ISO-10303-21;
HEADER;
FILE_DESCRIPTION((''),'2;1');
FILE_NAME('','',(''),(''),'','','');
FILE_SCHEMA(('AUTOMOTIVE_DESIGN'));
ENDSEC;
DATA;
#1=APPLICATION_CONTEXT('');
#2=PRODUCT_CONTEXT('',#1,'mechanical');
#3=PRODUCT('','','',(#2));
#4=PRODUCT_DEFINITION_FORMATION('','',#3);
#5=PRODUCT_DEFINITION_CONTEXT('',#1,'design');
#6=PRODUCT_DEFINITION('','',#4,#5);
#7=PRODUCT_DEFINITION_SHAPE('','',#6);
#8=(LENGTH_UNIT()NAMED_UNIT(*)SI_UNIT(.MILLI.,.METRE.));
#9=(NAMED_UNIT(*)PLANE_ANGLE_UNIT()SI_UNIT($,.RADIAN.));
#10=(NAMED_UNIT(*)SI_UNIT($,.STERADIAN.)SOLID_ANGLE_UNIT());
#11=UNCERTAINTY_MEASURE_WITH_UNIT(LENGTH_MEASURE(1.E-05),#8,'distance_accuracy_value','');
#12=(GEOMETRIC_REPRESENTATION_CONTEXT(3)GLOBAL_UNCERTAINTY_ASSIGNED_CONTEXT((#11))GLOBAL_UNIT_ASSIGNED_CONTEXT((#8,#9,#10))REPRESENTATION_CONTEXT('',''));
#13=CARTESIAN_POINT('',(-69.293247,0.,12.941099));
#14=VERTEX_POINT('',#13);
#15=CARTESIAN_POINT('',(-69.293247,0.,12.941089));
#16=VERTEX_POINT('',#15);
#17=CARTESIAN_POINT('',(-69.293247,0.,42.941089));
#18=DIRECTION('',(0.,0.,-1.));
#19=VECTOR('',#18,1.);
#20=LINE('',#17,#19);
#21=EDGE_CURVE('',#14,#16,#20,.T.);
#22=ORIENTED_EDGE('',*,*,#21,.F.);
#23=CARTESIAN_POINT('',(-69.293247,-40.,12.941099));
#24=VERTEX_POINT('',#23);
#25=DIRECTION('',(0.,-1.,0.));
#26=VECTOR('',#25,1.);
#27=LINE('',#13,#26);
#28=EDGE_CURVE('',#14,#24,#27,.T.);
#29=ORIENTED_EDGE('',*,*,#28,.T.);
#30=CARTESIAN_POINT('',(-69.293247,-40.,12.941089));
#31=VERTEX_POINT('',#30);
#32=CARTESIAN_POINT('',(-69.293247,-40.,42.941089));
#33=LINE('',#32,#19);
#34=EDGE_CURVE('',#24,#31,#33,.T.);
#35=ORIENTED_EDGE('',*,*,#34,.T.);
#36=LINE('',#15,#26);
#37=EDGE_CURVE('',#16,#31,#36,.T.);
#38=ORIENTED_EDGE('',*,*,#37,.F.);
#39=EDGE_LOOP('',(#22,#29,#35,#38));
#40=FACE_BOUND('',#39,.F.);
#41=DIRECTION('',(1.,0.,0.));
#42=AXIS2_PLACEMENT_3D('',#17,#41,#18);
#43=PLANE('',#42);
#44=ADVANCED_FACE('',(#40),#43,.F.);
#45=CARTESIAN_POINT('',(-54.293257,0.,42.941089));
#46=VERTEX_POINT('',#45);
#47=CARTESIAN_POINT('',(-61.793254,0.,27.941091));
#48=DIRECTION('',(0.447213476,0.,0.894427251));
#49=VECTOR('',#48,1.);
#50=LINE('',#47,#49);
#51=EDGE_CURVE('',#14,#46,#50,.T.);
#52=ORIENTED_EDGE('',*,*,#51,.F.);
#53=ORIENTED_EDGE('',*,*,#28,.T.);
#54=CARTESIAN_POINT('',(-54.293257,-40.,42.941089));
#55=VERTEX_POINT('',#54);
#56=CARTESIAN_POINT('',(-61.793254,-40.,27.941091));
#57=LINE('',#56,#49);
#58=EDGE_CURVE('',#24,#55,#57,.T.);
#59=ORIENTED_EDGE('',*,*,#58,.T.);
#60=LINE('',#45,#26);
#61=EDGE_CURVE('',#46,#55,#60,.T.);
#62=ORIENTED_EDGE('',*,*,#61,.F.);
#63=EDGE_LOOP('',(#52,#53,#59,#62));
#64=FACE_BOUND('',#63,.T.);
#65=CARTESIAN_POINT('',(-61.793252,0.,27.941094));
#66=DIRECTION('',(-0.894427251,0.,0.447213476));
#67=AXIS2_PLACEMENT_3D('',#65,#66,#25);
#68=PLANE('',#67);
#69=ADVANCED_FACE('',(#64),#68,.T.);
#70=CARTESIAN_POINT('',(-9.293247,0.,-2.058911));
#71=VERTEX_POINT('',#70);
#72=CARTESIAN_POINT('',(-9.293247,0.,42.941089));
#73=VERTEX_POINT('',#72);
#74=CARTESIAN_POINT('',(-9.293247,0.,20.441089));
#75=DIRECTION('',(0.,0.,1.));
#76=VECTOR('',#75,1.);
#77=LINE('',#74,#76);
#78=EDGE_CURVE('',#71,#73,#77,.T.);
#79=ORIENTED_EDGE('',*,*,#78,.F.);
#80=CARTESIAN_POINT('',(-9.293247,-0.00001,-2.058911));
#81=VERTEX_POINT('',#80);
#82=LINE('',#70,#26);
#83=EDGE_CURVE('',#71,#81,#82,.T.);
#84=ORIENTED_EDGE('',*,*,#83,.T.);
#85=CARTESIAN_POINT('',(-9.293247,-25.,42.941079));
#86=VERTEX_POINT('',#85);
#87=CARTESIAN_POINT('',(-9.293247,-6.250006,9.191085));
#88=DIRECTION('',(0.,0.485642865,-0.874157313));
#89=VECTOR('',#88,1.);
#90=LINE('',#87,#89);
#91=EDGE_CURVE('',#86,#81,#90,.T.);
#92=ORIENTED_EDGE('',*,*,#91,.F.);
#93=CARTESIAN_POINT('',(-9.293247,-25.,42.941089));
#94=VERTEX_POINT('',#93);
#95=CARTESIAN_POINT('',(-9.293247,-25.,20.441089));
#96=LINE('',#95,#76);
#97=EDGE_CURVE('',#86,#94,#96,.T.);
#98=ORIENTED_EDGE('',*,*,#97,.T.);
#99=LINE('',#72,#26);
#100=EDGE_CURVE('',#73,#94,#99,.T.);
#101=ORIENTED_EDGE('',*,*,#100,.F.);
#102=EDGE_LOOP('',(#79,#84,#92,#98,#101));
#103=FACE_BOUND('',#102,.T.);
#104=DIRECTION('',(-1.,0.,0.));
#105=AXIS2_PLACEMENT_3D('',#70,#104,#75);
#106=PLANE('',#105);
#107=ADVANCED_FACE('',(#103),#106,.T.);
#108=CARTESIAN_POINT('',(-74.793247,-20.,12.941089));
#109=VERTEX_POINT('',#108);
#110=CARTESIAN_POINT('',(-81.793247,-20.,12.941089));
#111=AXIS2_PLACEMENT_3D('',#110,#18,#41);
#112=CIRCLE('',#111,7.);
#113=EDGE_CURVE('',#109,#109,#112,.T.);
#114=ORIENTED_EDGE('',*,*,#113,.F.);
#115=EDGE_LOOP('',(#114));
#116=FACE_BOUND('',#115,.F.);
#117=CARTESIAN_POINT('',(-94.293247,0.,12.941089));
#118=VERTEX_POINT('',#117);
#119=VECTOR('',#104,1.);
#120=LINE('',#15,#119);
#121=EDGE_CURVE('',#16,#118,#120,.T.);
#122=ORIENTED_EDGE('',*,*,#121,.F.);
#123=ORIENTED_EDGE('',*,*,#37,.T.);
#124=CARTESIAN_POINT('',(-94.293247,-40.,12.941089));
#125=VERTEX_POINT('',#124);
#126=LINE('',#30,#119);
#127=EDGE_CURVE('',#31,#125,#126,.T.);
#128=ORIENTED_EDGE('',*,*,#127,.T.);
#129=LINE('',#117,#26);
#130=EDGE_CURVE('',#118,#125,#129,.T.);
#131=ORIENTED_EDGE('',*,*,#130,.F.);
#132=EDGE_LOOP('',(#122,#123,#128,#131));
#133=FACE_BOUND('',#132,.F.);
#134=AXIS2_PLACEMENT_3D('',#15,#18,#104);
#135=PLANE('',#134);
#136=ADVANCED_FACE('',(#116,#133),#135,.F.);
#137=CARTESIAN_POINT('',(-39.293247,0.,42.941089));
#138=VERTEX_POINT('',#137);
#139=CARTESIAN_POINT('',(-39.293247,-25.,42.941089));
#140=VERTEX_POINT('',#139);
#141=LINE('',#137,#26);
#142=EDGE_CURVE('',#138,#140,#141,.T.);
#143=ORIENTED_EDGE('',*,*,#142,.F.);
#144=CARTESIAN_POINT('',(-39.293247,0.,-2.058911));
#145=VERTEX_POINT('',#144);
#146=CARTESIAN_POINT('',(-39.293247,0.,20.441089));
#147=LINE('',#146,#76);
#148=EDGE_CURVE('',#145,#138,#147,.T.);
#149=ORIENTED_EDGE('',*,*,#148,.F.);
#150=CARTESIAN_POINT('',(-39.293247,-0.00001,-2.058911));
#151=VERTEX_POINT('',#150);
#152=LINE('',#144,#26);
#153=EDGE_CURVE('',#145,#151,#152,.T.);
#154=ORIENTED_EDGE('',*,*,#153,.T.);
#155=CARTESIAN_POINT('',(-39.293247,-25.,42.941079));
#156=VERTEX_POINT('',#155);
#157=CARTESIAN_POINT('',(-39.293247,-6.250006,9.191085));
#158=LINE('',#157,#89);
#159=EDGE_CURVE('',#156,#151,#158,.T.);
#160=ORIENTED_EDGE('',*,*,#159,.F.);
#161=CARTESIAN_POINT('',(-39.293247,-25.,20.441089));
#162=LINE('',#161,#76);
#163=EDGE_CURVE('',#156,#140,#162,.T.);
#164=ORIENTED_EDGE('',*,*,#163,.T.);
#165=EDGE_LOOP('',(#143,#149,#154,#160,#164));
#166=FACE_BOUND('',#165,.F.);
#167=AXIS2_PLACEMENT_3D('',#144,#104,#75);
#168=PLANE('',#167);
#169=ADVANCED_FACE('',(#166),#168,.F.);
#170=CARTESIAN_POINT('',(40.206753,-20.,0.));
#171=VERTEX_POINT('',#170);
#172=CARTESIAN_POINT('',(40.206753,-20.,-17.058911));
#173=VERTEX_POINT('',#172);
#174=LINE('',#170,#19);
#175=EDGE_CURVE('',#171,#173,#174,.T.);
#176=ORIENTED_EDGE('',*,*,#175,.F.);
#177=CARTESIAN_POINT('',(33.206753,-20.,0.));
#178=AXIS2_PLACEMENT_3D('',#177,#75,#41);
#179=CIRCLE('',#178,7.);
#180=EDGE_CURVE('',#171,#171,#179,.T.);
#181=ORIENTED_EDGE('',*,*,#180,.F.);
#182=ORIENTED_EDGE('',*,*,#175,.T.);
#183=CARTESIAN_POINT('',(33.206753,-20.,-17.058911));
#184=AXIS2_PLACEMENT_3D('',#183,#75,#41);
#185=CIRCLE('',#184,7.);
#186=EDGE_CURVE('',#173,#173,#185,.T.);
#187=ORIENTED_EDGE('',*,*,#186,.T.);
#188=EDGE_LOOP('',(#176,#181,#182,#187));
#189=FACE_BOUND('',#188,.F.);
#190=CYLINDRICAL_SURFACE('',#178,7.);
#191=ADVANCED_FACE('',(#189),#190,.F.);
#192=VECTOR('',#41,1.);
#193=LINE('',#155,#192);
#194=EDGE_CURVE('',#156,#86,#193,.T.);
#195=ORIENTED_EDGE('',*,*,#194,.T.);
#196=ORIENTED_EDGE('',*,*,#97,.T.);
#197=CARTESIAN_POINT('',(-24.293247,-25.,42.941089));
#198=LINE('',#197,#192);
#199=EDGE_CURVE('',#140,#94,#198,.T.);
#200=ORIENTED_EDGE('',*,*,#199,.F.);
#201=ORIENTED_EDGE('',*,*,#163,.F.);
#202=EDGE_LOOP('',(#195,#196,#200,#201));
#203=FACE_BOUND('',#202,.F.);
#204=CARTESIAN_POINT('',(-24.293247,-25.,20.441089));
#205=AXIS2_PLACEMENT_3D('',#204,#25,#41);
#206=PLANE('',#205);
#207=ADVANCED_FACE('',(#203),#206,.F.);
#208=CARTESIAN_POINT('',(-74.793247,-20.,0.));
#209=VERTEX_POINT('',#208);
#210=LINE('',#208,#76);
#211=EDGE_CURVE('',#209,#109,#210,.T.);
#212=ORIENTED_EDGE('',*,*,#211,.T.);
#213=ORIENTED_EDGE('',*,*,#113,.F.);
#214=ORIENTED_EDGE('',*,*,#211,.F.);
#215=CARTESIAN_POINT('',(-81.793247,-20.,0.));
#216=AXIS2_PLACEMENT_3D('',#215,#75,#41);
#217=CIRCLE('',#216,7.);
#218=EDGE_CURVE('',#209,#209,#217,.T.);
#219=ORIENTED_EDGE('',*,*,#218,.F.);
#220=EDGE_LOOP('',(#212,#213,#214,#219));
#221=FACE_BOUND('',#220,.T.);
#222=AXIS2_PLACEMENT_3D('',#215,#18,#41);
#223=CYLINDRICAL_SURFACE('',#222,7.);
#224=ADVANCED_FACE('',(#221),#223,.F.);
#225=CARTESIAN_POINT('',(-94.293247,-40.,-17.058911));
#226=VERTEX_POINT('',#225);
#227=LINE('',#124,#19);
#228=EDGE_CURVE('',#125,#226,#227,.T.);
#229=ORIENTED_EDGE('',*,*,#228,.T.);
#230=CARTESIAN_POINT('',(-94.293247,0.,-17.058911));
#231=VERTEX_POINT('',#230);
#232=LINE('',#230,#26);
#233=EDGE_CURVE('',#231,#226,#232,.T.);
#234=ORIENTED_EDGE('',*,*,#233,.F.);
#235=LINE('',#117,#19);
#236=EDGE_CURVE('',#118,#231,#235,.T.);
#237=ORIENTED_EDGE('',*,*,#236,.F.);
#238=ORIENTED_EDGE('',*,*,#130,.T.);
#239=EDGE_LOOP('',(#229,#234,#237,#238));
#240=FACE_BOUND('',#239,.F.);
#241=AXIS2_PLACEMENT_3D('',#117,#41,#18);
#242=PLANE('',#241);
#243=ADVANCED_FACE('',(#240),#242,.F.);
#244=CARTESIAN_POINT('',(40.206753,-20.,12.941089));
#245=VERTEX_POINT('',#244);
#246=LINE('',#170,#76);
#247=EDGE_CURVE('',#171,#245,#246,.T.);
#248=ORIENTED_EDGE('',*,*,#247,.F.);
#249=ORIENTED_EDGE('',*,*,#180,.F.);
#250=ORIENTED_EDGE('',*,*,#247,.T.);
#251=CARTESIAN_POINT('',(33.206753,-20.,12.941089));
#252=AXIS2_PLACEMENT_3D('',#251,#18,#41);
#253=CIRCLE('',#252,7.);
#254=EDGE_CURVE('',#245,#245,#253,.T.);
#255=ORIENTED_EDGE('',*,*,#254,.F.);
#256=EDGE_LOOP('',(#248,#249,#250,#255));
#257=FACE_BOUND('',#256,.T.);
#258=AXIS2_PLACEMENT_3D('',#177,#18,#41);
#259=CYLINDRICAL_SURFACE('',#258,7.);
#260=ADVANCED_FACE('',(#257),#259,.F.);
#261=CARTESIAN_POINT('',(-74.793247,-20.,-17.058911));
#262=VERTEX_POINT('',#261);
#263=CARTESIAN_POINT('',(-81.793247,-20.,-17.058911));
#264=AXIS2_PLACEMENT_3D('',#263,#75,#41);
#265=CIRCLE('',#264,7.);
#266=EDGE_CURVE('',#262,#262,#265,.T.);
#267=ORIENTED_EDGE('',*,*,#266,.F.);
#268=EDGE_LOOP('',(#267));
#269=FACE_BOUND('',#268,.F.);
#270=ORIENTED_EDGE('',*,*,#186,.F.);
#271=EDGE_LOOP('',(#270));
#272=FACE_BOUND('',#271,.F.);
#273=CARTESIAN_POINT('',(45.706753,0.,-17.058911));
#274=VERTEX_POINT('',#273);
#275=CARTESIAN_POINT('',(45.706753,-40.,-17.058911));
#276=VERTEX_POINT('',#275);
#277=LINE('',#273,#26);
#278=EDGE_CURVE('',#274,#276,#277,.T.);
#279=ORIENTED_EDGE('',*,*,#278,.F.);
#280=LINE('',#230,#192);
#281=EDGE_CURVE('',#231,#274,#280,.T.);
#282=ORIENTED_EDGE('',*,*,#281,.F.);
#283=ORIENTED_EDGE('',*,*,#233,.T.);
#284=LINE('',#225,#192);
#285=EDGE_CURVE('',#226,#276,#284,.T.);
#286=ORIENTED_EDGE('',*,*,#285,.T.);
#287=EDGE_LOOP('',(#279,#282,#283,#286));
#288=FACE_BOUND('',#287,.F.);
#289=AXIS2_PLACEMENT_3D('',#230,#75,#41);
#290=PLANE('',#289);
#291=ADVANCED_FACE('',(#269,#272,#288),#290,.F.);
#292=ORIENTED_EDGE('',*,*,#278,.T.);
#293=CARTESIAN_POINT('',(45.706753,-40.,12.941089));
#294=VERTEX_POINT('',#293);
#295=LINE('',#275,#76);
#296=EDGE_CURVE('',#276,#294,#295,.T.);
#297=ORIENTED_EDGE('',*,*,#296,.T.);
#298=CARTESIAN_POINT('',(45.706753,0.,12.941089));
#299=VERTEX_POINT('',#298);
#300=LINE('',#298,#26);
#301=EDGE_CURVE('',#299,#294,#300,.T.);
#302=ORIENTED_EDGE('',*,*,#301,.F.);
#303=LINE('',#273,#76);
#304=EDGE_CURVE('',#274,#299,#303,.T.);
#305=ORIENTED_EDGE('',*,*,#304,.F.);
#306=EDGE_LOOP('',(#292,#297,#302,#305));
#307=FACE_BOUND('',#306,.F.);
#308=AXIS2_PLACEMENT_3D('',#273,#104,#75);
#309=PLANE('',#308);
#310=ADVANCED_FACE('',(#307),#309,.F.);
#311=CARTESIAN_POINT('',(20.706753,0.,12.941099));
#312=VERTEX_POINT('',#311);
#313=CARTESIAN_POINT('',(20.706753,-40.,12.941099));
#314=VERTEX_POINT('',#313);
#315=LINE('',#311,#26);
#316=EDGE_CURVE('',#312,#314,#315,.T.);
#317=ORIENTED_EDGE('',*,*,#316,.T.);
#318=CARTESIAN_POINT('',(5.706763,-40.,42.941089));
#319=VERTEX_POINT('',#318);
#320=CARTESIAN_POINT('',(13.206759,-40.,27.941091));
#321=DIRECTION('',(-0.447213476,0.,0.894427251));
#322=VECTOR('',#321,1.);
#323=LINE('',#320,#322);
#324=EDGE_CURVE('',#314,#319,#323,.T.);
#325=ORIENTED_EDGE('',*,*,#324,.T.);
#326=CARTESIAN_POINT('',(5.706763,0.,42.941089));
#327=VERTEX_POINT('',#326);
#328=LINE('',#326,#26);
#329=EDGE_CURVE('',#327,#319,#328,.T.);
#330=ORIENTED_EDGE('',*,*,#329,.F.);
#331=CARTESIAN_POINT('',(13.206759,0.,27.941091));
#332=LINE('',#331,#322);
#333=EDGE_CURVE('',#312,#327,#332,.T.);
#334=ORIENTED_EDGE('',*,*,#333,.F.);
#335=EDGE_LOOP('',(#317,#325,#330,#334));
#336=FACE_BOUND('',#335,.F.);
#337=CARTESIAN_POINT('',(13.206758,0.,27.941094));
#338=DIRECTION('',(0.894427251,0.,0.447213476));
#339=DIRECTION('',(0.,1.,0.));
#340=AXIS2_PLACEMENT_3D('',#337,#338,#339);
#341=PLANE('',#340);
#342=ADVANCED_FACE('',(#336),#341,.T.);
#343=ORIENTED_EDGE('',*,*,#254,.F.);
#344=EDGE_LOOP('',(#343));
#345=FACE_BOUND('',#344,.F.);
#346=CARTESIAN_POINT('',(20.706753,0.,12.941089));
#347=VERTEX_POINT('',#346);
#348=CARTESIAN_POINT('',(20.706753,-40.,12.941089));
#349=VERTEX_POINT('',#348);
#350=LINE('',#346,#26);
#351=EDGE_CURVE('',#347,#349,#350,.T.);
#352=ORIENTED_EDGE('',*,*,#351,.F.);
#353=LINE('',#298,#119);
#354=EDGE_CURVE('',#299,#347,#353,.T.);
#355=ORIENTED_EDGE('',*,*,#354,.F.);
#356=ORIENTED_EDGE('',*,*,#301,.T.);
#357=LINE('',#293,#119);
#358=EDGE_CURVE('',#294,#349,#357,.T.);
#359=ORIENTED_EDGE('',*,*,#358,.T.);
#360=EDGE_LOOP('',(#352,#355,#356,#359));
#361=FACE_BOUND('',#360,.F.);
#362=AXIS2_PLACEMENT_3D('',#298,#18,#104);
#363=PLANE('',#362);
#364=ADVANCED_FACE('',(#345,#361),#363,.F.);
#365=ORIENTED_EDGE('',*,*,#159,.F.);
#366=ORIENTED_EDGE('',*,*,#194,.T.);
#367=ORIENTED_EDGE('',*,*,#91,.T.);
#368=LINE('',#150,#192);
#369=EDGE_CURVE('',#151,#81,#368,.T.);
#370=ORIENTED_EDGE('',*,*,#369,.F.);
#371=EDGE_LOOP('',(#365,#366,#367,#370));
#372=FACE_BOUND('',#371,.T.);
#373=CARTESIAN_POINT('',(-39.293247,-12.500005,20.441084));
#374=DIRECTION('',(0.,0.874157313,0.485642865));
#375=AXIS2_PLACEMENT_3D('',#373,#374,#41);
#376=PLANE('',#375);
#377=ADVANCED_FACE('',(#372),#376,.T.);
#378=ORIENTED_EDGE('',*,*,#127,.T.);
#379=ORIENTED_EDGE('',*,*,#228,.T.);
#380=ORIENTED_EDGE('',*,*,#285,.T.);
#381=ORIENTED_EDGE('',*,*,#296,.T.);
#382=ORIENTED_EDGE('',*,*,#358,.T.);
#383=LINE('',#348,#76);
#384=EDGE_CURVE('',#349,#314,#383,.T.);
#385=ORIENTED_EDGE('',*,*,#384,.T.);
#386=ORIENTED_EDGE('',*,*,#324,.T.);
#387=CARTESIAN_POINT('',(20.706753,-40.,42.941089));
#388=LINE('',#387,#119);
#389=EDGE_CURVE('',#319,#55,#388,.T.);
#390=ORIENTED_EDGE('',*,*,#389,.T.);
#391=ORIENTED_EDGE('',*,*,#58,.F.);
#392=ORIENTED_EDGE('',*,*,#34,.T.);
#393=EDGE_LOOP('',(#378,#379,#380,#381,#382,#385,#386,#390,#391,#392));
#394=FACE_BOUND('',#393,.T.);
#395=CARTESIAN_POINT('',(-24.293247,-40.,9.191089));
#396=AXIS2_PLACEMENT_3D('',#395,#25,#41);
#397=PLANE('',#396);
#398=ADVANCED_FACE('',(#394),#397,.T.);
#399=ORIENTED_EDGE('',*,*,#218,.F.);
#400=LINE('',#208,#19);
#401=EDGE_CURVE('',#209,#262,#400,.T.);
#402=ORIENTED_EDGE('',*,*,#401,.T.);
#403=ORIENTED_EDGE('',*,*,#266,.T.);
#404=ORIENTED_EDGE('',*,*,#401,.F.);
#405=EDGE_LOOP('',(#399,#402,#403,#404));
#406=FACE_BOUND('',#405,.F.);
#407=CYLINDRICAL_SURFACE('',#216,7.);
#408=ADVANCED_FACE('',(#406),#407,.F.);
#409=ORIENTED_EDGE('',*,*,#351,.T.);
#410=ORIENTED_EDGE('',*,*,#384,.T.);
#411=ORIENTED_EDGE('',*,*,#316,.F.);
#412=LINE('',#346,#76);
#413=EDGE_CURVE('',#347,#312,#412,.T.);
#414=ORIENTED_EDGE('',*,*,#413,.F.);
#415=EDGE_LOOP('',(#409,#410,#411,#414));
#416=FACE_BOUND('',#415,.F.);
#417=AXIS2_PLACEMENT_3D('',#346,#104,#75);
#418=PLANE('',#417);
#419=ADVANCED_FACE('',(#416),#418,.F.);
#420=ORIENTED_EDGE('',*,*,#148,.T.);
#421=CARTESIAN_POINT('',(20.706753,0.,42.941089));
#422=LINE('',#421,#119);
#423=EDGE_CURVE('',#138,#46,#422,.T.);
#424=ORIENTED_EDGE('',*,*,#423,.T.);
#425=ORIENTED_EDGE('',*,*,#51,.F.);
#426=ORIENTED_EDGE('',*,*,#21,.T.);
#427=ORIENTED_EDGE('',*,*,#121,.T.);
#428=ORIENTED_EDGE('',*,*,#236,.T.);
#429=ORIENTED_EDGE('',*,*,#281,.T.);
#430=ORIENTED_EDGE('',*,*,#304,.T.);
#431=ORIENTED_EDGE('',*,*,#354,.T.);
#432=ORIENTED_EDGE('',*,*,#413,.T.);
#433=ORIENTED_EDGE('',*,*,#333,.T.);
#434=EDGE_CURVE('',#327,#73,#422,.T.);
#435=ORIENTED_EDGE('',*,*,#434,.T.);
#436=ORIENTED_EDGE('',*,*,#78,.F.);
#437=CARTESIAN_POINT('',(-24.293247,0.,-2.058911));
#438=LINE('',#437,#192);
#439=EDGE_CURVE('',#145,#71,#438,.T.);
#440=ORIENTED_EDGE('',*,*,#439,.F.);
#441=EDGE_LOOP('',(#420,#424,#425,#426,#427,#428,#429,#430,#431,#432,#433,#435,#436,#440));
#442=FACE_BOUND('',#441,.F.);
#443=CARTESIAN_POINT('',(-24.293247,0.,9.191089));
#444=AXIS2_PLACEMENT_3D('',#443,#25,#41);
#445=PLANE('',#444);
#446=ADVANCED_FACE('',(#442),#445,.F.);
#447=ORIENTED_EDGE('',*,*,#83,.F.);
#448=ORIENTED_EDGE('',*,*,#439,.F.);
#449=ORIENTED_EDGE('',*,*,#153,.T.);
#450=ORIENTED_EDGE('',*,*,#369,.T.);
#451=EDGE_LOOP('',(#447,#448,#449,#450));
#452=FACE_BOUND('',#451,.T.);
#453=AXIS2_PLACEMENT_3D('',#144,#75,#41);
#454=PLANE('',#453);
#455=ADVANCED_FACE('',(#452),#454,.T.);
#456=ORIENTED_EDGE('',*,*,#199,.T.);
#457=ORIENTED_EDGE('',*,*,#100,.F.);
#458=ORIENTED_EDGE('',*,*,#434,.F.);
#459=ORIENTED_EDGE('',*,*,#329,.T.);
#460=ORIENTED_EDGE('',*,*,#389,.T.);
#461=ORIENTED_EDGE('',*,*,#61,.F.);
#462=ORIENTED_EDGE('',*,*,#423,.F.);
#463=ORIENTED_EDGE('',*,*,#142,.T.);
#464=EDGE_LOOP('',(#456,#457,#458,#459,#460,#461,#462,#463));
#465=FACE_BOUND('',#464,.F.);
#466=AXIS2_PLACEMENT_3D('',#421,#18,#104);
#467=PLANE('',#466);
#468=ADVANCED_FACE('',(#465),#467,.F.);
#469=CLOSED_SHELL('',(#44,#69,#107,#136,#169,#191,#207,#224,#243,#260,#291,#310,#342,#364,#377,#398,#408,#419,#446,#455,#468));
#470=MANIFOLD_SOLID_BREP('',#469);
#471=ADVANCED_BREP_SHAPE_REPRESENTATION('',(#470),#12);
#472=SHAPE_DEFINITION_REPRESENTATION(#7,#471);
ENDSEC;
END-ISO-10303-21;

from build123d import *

# Parameters (mm, degrees)
F1_DEPTH      = 40
F2_SIZE2      = 14.99999
F2_SIZE       = 29.99999
F2_2_SIZE2    = 14.99999
F2_2_SIZE     = 29.99999
F3_W          = 30
F3_H          = 45
F4_DEPTH      = 25
F5_SIZE2      = 24.99999
F5_SIZE       = 44.99999
F6_R          = 7
F7_DEPTH      = 15
F7_DEPTH_BACK = 20


# Not quite as in the source:
# - a fillet or chamfer is up to 0.001 mm smaller than in the source, because OpenCascade refuses the exact size


with BuildPart() as f1:
    # F0 (on Front) → F1 (new body)
    with BuildSketch(Plane.XZ):
        Polygon((20.7067526877, 42.941089198), (-69.2932473123, 42.941089198), (-69.2932473123, 12.941089198), (-94.2932473123, 12.941089198), (-94.2932473123, -17.058910802), (45.7067526877, -17.058910802), (45.7067526877, 12.941089198), (20.7067526877, 12.941089198), align=None)
    extrude(amount=F1_DEPTH)

    # F2 (size 30 and 15 in the source; OpenCascade refuses exactly that, so slightly less here)
    f2_edges = [f1.edges().sort_by_distance(p)[0] for p in [
        (-69.293247, -20, 42.941089),
    ]]
    f2_side = f1.faces().sort_by_distance((-69.293247, -20, 27.941089))[0]
    chamfer(f2_edges, length=F2_SIZE, length2=F2_SIZE2, reference=f2_side)

    # F2#2 (size 30 and 15 in the source; OpenCascade refuses exactly that, so slightly less here)
    f2_2_edges = [f1.edges().sort_by_distance(p)[0] for p in [
        (20.706753, -20, 42.941089),
    ]]
    f2_2_side = f1.faces().sort_by_distance((20.706753, -20, 27.941089))[0]
    chamfer(f2_2_edges, length=F2_2_SIZE, length2=F2_2_SIZE2, reference=f2_2_side)

    # F3 (on Front) → F4 (cut)
    with BuildSketch(Plane.XZ):
        with Locations((-24.2932473123, 20.441089198)):
            Rectangle(F3_W, F3_H)
    extrude(amount=F4_DEPTH, mode=Mode.SUBTRACT)

    # F5 (size 45 and 25 in the source; OpenCascade refuses exactly that, so slightly less here)
    f5_edges = [f1.edges().sort_by_distance(p)[0] for p in [
        (-24.293247, -25, -2.058911),
    ]]
    f5_side = f1.faces().sort_by_distance((-24.293247, -25, 20.441089))[0]
    chamfer(f5_edges, length=F5_SIZE, length2=F5_SIZE2, reference=f5_side)

    # F6 (on Top) → F7 (cut, two sides)
    with BuildSketch(Plane.XY) as f7_sk:
        with Locations((-81.7932473123, -20)):
            Circle(F6_R)
        with Locations((33.2067526877, -20)):
            Circle(F6_R)
    extrude(amount=F7_DEPTH, mode=Mode.SUBTRACT)
    extrude(f7_sk.sketch, amount=-F7_DEPTH_BACK, mode=Mode.SUBTRACT)


solid = f1.part
